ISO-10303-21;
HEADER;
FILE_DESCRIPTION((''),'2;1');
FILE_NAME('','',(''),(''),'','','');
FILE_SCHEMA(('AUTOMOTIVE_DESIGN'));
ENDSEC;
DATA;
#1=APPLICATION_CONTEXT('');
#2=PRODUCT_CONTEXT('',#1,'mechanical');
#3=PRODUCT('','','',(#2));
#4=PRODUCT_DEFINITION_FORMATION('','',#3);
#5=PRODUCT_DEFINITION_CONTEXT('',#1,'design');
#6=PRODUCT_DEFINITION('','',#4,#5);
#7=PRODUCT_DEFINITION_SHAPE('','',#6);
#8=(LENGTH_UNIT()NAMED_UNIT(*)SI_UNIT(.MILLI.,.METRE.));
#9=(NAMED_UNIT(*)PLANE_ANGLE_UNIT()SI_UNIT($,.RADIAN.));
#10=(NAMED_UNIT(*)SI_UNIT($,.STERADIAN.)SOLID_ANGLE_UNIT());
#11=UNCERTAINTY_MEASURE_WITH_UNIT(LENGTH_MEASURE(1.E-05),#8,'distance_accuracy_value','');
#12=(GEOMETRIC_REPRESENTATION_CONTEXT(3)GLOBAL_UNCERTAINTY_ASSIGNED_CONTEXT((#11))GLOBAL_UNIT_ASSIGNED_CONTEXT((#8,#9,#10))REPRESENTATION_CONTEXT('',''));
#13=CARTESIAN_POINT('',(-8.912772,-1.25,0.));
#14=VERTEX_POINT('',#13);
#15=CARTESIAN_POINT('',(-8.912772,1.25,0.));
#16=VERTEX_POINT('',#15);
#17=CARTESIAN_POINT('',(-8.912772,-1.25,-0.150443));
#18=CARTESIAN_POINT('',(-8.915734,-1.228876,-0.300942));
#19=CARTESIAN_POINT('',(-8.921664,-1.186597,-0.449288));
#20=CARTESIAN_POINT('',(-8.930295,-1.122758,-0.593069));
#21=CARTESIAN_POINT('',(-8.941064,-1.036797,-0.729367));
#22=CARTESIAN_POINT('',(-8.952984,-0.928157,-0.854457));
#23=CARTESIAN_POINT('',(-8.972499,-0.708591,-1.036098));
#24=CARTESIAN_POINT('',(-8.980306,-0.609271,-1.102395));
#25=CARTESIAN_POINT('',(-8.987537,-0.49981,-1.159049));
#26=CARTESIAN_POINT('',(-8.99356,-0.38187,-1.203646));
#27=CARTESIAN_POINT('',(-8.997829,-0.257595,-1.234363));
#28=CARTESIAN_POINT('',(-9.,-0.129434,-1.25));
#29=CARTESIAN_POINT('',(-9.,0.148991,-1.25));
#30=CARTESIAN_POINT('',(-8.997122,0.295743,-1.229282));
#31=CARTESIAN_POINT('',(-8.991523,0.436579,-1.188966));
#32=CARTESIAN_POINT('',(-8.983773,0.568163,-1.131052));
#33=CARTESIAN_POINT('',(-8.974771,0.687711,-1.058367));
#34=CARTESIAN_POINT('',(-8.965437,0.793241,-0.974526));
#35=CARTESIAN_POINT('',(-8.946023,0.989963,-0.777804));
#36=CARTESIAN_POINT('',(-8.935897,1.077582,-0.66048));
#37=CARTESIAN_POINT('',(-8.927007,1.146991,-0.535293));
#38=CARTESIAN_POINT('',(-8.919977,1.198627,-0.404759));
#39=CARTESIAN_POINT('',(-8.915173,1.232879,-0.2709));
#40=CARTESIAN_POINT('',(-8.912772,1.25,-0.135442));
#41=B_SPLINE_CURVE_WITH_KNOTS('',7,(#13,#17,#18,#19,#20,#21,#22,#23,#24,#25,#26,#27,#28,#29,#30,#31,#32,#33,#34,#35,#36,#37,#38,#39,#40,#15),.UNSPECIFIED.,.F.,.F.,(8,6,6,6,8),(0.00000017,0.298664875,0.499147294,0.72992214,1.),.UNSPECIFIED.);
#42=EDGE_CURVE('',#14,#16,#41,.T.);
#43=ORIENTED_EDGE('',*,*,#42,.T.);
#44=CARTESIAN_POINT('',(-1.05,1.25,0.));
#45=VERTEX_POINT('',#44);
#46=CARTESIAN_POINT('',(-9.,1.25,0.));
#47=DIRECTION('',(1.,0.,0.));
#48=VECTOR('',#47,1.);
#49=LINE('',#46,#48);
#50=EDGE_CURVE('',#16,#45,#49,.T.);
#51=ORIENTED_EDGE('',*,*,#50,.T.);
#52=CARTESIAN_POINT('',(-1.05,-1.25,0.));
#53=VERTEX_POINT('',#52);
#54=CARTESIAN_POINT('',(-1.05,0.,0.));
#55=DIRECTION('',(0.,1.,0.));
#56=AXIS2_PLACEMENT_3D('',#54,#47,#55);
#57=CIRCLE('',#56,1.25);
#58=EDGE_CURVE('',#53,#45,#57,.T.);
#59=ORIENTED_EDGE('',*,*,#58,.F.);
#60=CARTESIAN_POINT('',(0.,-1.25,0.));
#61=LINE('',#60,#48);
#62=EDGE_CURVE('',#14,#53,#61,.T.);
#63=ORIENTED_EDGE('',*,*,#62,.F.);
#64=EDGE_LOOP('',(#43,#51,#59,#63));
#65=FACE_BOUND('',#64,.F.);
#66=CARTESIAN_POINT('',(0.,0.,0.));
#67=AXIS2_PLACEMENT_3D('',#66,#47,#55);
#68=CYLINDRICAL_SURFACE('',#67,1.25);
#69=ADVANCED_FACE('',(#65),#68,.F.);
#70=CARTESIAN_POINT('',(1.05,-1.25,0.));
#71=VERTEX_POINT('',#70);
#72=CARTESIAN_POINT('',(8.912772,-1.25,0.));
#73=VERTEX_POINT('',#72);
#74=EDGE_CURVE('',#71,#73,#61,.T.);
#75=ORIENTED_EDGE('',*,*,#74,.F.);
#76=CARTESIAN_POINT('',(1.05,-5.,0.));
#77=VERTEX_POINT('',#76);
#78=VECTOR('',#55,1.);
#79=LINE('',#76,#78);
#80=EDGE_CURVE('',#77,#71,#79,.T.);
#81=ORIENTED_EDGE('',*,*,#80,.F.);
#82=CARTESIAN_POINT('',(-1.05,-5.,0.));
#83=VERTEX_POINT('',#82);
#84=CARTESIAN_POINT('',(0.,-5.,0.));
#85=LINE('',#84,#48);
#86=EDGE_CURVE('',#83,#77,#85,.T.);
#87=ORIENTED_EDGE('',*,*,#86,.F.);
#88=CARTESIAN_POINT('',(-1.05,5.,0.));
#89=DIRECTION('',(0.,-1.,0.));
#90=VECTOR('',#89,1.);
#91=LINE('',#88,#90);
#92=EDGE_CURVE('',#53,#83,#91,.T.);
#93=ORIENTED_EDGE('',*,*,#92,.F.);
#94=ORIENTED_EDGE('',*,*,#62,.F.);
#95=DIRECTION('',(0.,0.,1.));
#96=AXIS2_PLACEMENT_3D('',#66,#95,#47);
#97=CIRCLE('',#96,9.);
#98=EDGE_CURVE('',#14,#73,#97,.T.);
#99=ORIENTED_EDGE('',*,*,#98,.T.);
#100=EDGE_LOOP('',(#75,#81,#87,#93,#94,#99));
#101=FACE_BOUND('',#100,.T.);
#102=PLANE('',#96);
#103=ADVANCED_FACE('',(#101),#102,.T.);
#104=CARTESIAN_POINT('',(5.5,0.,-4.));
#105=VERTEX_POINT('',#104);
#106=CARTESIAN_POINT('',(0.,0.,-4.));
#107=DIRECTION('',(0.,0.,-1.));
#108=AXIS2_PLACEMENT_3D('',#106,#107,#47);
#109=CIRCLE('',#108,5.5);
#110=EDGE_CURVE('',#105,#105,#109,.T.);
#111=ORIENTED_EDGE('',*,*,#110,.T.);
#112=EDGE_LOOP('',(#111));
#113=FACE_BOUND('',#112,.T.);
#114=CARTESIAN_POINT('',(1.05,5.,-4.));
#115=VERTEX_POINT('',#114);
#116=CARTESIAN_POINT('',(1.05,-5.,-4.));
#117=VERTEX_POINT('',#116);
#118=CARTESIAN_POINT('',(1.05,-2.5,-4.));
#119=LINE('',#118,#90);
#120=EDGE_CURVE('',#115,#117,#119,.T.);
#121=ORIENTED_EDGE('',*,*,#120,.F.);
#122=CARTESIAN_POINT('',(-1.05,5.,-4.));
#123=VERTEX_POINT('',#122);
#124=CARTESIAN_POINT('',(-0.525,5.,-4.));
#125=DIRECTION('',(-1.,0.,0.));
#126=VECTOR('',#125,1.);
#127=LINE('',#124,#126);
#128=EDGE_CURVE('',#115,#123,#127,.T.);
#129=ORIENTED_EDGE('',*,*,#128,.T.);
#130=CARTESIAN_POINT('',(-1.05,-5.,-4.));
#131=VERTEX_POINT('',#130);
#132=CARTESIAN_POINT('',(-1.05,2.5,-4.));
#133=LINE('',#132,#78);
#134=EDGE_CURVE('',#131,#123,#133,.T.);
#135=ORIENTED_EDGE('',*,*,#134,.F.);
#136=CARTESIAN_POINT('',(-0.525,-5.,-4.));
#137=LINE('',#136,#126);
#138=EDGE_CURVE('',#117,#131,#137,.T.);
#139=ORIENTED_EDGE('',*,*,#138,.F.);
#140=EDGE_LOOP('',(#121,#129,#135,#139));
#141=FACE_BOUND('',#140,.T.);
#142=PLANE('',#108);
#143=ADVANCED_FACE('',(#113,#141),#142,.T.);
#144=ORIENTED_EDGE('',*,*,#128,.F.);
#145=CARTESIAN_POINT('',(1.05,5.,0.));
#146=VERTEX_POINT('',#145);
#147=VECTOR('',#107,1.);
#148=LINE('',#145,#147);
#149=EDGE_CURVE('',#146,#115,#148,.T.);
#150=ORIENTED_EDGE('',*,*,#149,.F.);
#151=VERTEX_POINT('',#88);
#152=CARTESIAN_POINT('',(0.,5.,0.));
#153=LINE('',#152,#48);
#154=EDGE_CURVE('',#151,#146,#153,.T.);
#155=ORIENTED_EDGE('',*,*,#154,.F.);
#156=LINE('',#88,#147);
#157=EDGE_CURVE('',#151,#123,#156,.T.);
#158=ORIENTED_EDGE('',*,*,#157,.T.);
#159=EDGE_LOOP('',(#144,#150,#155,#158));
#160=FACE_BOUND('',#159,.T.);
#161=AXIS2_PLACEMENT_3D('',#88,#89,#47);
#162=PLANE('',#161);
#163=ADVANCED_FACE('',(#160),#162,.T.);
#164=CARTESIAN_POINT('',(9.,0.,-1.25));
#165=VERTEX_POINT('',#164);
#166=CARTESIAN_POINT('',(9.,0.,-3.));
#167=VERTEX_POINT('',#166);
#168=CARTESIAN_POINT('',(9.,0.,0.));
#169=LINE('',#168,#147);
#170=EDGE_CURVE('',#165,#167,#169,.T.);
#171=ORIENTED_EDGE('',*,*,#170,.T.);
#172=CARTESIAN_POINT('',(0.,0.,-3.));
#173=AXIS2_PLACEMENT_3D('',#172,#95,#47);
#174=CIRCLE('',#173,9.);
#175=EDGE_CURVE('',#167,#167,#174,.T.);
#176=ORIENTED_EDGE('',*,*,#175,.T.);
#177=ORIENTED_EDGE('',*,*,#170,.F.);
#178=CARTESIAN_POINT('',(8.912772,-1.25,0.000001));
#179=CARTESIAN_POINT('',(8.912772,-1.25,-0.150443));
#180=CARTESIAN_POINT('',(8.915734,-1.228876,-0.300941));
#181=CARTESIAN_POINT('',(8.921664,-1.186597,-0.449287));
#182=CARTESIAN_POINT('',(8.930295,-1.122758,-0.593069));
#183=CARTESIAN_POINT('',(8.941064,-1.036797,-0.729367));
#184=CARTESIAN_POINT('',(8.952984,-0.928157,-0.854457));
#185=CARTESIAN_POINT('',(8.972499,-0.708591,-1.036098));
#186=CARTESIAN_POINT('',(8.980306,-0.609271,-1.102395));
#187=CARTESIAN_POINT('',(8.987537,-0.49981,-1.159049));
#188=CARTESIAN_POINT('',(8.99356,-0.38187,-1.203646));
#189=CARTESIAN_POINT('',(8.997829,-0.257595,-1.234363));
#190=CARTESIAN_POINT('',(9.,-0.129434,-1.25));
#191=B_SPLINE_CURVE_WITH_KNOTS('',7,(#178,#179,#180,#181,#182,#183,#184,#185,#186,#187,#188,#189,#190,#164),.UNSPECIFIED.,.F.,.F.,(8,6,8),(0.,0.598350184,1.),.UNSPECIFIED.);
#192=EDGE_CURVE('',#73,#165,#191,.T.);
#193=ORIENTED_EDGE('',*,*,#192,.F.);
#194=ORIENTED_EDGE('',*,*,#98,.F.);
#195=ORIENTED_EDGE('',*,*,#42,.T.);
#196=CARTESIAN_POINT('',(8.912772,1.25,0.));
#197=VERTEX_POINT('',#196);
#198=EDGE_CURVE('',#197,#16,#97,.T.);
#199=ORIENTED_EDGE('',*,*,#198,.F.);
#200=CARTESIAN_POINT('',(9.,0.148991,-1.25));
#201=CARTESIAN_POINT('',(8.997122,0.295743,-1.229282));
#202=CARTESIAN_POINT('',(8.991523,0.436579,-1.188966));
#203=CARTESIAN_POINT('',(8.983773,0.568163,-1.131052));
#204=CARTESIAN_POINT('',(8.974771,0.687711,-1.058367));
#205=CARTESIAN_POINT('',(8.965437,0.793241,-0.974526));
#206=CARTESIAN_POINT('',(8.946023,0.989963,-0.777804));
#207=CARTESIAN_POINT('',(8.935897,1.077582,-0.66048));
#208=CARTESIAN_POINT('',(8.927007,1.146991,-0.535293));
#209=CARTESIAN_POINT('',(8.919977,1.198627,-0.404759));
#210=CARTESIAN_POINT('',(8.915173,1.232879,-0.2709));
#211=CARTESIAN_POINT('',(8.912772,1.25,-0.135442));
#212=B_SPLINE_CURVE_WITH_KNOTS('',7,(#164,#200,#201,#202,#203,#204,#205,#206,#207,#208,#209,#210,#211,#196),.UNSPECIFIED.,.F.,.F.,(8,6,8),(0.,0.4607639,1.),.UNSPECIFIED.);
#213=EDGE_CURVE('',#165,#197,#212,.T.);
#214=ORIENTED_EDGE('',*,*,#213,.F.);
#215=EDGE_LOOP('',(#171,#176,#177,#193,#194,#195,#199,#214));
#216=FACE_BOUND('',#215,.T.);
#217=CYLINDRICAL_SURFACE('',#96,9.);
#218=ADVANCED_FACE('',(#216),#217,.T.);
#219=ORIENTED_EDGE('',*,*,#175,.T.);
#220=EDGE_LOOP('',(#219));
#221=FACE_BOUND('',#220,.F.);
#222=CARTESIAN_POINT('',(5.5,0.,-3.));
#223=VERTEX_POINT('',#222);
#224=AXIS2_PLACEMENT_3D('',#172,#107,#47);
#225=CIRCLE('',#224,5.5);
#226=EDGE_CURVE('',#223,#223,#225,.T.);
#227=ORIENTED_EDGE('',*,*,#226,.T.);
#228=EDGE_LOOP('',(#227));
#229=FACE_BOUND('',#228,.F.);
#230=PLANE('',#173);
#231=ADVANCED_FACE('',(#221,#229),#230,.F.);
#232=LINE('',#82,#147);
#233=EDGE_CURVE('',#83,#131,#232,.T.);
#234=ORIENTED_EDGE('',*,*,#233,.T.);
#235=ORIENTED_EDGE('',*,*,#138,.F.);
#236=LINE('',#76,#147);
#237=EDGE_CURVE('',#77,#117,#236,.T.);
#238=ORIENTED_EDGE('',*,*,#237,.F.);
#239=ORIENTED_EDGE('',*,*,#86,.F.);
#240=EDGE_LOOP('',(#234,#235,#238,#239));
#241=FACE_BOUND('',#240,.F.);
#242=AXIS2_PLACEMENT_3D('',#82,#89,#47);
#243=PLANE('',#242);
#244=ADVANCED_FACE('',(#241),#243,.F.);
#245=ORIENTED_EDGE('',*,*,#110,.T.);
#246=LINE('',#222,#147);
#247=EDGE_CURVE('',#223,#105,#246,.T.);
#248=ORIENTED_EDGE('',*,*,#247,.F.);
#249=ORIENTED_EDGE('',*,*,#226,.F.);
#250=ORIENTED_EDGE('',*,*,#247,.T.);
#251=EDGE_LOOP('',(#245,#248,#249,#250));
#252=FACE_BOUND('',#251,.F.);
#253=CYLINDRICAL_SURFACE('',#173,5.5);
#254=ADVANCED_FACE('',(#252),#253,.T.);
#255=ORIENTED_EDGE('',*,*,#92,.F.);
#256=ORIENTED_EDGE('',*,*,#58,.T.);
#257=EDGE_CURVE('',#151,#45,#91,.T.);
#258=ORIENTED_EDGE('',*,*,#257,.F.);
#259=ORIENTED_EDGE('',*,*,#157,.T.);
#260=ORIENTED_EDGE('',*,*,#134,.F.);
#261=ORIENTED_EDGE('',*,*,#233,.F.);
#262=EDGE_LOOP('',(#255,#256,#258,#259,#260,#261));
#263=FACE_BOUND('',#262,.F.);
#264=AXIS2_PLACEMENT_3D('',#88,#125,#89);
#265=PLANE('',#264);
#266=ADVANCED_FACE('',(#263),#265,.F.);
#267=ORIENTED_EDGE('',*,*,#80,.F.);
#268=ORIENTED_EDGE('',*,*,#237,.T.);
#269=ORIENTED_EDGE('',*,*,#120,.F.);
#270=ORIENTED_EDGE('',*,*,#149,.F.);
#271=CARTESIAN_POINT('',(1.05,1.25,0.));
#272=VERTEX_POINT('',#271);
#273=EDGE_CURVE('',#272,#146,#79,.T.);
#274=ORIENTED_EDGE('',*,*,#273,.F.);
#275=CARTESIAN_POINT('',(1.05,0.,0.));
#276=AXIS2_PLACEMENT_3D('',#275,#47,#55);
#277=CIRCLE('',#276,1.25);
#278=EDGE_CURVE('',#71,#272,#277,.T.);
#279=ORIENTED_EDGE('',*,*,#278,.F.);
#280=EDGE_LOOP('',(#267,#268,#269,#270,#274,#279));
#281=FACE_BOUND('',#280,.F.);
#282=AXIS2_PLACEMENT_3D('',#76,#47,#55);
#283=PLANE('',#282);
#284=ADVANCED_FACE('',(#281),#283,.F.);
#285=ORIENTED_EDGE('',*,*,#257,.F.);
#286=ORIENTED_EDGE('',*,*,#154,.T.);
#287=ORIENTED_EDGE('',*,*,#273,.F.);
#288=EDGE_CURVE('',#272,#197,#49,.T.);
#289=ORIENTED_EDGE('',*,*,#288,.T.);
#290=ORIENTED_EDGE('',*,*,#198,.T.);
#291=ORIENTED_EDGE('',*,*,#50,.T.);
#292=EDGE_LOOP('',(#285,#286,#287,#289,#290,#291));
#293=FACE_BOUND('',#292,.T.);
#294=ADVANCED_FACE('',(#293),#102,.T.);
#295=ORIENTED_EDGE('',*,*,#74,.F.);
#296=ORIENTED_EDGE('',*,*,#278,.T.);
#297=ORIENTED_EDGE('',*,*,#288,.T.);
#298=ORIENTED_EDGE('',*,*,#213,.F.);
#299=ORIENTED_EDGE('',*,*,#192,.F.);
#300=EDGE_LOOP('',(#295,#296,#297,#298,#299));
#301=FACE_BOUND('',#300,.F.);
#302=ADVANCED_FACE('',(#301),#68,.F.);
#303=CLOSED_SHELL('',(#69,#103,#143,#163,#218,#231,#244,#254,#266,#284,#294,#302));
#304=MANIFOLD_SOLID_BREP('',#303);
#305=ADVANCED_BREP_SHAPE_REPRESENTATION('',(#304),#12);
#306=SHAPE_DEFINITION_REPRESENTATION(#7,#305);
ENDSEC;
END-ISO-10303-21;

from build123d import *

# Parameters (mm, degrees)
F0_R     = 9
F1_DEPTH = 3
F2_R     = 5.5
F3_DEPTH = 1
F4_R     = 1.25
F5_DEPTH = 9
F6_W     = 2.1
F6_H     = 3.75
F6_H_2   = 2.5
F7_DEPTH = 4.001


# Not quite as in the source:
# - a feature names something its author has since deleted; it is built from what else it names


with BuildPart() as f1:
    # F0 (on Top) → F1 (new body)
    with BuildSketch(Plane.XY):
        Circle(F0_R)
    extrude(amount=-F1_DEPTH)

    # F2 (on face) → F3 (join)
    with BuildSketch(Plane(origin=(0, 0, -3), x_dir=(1, 0, 0), z_dir=(0, 0, -1))):
        Circle(F2_R)
    extrude(amount=F3_DEPTH)

    # F4 (on Right) → F5 (cut, symmetric)
    with BuildSketch(Plane.YZ):
        Circle(F4_R)
    extrude(amount=F5_DEPTH, both=True, mode=Mode.SUBTRACT)

    # F6 (on face) → F7 (cut, through all)
    with BuildSketch(Plane.XY):
        with Locations((0, -3.125)):
            Rectangle(F6_W, F6_H)
        Rectangle(F6_W, F6_H_2)
        with Locations((0, 3.125)):
            Rectangle(F6_W, F6_H)
    extrude(amount=-F7_DEPTH, mode=Mode.SUBTRACT)


solid = f1.part
